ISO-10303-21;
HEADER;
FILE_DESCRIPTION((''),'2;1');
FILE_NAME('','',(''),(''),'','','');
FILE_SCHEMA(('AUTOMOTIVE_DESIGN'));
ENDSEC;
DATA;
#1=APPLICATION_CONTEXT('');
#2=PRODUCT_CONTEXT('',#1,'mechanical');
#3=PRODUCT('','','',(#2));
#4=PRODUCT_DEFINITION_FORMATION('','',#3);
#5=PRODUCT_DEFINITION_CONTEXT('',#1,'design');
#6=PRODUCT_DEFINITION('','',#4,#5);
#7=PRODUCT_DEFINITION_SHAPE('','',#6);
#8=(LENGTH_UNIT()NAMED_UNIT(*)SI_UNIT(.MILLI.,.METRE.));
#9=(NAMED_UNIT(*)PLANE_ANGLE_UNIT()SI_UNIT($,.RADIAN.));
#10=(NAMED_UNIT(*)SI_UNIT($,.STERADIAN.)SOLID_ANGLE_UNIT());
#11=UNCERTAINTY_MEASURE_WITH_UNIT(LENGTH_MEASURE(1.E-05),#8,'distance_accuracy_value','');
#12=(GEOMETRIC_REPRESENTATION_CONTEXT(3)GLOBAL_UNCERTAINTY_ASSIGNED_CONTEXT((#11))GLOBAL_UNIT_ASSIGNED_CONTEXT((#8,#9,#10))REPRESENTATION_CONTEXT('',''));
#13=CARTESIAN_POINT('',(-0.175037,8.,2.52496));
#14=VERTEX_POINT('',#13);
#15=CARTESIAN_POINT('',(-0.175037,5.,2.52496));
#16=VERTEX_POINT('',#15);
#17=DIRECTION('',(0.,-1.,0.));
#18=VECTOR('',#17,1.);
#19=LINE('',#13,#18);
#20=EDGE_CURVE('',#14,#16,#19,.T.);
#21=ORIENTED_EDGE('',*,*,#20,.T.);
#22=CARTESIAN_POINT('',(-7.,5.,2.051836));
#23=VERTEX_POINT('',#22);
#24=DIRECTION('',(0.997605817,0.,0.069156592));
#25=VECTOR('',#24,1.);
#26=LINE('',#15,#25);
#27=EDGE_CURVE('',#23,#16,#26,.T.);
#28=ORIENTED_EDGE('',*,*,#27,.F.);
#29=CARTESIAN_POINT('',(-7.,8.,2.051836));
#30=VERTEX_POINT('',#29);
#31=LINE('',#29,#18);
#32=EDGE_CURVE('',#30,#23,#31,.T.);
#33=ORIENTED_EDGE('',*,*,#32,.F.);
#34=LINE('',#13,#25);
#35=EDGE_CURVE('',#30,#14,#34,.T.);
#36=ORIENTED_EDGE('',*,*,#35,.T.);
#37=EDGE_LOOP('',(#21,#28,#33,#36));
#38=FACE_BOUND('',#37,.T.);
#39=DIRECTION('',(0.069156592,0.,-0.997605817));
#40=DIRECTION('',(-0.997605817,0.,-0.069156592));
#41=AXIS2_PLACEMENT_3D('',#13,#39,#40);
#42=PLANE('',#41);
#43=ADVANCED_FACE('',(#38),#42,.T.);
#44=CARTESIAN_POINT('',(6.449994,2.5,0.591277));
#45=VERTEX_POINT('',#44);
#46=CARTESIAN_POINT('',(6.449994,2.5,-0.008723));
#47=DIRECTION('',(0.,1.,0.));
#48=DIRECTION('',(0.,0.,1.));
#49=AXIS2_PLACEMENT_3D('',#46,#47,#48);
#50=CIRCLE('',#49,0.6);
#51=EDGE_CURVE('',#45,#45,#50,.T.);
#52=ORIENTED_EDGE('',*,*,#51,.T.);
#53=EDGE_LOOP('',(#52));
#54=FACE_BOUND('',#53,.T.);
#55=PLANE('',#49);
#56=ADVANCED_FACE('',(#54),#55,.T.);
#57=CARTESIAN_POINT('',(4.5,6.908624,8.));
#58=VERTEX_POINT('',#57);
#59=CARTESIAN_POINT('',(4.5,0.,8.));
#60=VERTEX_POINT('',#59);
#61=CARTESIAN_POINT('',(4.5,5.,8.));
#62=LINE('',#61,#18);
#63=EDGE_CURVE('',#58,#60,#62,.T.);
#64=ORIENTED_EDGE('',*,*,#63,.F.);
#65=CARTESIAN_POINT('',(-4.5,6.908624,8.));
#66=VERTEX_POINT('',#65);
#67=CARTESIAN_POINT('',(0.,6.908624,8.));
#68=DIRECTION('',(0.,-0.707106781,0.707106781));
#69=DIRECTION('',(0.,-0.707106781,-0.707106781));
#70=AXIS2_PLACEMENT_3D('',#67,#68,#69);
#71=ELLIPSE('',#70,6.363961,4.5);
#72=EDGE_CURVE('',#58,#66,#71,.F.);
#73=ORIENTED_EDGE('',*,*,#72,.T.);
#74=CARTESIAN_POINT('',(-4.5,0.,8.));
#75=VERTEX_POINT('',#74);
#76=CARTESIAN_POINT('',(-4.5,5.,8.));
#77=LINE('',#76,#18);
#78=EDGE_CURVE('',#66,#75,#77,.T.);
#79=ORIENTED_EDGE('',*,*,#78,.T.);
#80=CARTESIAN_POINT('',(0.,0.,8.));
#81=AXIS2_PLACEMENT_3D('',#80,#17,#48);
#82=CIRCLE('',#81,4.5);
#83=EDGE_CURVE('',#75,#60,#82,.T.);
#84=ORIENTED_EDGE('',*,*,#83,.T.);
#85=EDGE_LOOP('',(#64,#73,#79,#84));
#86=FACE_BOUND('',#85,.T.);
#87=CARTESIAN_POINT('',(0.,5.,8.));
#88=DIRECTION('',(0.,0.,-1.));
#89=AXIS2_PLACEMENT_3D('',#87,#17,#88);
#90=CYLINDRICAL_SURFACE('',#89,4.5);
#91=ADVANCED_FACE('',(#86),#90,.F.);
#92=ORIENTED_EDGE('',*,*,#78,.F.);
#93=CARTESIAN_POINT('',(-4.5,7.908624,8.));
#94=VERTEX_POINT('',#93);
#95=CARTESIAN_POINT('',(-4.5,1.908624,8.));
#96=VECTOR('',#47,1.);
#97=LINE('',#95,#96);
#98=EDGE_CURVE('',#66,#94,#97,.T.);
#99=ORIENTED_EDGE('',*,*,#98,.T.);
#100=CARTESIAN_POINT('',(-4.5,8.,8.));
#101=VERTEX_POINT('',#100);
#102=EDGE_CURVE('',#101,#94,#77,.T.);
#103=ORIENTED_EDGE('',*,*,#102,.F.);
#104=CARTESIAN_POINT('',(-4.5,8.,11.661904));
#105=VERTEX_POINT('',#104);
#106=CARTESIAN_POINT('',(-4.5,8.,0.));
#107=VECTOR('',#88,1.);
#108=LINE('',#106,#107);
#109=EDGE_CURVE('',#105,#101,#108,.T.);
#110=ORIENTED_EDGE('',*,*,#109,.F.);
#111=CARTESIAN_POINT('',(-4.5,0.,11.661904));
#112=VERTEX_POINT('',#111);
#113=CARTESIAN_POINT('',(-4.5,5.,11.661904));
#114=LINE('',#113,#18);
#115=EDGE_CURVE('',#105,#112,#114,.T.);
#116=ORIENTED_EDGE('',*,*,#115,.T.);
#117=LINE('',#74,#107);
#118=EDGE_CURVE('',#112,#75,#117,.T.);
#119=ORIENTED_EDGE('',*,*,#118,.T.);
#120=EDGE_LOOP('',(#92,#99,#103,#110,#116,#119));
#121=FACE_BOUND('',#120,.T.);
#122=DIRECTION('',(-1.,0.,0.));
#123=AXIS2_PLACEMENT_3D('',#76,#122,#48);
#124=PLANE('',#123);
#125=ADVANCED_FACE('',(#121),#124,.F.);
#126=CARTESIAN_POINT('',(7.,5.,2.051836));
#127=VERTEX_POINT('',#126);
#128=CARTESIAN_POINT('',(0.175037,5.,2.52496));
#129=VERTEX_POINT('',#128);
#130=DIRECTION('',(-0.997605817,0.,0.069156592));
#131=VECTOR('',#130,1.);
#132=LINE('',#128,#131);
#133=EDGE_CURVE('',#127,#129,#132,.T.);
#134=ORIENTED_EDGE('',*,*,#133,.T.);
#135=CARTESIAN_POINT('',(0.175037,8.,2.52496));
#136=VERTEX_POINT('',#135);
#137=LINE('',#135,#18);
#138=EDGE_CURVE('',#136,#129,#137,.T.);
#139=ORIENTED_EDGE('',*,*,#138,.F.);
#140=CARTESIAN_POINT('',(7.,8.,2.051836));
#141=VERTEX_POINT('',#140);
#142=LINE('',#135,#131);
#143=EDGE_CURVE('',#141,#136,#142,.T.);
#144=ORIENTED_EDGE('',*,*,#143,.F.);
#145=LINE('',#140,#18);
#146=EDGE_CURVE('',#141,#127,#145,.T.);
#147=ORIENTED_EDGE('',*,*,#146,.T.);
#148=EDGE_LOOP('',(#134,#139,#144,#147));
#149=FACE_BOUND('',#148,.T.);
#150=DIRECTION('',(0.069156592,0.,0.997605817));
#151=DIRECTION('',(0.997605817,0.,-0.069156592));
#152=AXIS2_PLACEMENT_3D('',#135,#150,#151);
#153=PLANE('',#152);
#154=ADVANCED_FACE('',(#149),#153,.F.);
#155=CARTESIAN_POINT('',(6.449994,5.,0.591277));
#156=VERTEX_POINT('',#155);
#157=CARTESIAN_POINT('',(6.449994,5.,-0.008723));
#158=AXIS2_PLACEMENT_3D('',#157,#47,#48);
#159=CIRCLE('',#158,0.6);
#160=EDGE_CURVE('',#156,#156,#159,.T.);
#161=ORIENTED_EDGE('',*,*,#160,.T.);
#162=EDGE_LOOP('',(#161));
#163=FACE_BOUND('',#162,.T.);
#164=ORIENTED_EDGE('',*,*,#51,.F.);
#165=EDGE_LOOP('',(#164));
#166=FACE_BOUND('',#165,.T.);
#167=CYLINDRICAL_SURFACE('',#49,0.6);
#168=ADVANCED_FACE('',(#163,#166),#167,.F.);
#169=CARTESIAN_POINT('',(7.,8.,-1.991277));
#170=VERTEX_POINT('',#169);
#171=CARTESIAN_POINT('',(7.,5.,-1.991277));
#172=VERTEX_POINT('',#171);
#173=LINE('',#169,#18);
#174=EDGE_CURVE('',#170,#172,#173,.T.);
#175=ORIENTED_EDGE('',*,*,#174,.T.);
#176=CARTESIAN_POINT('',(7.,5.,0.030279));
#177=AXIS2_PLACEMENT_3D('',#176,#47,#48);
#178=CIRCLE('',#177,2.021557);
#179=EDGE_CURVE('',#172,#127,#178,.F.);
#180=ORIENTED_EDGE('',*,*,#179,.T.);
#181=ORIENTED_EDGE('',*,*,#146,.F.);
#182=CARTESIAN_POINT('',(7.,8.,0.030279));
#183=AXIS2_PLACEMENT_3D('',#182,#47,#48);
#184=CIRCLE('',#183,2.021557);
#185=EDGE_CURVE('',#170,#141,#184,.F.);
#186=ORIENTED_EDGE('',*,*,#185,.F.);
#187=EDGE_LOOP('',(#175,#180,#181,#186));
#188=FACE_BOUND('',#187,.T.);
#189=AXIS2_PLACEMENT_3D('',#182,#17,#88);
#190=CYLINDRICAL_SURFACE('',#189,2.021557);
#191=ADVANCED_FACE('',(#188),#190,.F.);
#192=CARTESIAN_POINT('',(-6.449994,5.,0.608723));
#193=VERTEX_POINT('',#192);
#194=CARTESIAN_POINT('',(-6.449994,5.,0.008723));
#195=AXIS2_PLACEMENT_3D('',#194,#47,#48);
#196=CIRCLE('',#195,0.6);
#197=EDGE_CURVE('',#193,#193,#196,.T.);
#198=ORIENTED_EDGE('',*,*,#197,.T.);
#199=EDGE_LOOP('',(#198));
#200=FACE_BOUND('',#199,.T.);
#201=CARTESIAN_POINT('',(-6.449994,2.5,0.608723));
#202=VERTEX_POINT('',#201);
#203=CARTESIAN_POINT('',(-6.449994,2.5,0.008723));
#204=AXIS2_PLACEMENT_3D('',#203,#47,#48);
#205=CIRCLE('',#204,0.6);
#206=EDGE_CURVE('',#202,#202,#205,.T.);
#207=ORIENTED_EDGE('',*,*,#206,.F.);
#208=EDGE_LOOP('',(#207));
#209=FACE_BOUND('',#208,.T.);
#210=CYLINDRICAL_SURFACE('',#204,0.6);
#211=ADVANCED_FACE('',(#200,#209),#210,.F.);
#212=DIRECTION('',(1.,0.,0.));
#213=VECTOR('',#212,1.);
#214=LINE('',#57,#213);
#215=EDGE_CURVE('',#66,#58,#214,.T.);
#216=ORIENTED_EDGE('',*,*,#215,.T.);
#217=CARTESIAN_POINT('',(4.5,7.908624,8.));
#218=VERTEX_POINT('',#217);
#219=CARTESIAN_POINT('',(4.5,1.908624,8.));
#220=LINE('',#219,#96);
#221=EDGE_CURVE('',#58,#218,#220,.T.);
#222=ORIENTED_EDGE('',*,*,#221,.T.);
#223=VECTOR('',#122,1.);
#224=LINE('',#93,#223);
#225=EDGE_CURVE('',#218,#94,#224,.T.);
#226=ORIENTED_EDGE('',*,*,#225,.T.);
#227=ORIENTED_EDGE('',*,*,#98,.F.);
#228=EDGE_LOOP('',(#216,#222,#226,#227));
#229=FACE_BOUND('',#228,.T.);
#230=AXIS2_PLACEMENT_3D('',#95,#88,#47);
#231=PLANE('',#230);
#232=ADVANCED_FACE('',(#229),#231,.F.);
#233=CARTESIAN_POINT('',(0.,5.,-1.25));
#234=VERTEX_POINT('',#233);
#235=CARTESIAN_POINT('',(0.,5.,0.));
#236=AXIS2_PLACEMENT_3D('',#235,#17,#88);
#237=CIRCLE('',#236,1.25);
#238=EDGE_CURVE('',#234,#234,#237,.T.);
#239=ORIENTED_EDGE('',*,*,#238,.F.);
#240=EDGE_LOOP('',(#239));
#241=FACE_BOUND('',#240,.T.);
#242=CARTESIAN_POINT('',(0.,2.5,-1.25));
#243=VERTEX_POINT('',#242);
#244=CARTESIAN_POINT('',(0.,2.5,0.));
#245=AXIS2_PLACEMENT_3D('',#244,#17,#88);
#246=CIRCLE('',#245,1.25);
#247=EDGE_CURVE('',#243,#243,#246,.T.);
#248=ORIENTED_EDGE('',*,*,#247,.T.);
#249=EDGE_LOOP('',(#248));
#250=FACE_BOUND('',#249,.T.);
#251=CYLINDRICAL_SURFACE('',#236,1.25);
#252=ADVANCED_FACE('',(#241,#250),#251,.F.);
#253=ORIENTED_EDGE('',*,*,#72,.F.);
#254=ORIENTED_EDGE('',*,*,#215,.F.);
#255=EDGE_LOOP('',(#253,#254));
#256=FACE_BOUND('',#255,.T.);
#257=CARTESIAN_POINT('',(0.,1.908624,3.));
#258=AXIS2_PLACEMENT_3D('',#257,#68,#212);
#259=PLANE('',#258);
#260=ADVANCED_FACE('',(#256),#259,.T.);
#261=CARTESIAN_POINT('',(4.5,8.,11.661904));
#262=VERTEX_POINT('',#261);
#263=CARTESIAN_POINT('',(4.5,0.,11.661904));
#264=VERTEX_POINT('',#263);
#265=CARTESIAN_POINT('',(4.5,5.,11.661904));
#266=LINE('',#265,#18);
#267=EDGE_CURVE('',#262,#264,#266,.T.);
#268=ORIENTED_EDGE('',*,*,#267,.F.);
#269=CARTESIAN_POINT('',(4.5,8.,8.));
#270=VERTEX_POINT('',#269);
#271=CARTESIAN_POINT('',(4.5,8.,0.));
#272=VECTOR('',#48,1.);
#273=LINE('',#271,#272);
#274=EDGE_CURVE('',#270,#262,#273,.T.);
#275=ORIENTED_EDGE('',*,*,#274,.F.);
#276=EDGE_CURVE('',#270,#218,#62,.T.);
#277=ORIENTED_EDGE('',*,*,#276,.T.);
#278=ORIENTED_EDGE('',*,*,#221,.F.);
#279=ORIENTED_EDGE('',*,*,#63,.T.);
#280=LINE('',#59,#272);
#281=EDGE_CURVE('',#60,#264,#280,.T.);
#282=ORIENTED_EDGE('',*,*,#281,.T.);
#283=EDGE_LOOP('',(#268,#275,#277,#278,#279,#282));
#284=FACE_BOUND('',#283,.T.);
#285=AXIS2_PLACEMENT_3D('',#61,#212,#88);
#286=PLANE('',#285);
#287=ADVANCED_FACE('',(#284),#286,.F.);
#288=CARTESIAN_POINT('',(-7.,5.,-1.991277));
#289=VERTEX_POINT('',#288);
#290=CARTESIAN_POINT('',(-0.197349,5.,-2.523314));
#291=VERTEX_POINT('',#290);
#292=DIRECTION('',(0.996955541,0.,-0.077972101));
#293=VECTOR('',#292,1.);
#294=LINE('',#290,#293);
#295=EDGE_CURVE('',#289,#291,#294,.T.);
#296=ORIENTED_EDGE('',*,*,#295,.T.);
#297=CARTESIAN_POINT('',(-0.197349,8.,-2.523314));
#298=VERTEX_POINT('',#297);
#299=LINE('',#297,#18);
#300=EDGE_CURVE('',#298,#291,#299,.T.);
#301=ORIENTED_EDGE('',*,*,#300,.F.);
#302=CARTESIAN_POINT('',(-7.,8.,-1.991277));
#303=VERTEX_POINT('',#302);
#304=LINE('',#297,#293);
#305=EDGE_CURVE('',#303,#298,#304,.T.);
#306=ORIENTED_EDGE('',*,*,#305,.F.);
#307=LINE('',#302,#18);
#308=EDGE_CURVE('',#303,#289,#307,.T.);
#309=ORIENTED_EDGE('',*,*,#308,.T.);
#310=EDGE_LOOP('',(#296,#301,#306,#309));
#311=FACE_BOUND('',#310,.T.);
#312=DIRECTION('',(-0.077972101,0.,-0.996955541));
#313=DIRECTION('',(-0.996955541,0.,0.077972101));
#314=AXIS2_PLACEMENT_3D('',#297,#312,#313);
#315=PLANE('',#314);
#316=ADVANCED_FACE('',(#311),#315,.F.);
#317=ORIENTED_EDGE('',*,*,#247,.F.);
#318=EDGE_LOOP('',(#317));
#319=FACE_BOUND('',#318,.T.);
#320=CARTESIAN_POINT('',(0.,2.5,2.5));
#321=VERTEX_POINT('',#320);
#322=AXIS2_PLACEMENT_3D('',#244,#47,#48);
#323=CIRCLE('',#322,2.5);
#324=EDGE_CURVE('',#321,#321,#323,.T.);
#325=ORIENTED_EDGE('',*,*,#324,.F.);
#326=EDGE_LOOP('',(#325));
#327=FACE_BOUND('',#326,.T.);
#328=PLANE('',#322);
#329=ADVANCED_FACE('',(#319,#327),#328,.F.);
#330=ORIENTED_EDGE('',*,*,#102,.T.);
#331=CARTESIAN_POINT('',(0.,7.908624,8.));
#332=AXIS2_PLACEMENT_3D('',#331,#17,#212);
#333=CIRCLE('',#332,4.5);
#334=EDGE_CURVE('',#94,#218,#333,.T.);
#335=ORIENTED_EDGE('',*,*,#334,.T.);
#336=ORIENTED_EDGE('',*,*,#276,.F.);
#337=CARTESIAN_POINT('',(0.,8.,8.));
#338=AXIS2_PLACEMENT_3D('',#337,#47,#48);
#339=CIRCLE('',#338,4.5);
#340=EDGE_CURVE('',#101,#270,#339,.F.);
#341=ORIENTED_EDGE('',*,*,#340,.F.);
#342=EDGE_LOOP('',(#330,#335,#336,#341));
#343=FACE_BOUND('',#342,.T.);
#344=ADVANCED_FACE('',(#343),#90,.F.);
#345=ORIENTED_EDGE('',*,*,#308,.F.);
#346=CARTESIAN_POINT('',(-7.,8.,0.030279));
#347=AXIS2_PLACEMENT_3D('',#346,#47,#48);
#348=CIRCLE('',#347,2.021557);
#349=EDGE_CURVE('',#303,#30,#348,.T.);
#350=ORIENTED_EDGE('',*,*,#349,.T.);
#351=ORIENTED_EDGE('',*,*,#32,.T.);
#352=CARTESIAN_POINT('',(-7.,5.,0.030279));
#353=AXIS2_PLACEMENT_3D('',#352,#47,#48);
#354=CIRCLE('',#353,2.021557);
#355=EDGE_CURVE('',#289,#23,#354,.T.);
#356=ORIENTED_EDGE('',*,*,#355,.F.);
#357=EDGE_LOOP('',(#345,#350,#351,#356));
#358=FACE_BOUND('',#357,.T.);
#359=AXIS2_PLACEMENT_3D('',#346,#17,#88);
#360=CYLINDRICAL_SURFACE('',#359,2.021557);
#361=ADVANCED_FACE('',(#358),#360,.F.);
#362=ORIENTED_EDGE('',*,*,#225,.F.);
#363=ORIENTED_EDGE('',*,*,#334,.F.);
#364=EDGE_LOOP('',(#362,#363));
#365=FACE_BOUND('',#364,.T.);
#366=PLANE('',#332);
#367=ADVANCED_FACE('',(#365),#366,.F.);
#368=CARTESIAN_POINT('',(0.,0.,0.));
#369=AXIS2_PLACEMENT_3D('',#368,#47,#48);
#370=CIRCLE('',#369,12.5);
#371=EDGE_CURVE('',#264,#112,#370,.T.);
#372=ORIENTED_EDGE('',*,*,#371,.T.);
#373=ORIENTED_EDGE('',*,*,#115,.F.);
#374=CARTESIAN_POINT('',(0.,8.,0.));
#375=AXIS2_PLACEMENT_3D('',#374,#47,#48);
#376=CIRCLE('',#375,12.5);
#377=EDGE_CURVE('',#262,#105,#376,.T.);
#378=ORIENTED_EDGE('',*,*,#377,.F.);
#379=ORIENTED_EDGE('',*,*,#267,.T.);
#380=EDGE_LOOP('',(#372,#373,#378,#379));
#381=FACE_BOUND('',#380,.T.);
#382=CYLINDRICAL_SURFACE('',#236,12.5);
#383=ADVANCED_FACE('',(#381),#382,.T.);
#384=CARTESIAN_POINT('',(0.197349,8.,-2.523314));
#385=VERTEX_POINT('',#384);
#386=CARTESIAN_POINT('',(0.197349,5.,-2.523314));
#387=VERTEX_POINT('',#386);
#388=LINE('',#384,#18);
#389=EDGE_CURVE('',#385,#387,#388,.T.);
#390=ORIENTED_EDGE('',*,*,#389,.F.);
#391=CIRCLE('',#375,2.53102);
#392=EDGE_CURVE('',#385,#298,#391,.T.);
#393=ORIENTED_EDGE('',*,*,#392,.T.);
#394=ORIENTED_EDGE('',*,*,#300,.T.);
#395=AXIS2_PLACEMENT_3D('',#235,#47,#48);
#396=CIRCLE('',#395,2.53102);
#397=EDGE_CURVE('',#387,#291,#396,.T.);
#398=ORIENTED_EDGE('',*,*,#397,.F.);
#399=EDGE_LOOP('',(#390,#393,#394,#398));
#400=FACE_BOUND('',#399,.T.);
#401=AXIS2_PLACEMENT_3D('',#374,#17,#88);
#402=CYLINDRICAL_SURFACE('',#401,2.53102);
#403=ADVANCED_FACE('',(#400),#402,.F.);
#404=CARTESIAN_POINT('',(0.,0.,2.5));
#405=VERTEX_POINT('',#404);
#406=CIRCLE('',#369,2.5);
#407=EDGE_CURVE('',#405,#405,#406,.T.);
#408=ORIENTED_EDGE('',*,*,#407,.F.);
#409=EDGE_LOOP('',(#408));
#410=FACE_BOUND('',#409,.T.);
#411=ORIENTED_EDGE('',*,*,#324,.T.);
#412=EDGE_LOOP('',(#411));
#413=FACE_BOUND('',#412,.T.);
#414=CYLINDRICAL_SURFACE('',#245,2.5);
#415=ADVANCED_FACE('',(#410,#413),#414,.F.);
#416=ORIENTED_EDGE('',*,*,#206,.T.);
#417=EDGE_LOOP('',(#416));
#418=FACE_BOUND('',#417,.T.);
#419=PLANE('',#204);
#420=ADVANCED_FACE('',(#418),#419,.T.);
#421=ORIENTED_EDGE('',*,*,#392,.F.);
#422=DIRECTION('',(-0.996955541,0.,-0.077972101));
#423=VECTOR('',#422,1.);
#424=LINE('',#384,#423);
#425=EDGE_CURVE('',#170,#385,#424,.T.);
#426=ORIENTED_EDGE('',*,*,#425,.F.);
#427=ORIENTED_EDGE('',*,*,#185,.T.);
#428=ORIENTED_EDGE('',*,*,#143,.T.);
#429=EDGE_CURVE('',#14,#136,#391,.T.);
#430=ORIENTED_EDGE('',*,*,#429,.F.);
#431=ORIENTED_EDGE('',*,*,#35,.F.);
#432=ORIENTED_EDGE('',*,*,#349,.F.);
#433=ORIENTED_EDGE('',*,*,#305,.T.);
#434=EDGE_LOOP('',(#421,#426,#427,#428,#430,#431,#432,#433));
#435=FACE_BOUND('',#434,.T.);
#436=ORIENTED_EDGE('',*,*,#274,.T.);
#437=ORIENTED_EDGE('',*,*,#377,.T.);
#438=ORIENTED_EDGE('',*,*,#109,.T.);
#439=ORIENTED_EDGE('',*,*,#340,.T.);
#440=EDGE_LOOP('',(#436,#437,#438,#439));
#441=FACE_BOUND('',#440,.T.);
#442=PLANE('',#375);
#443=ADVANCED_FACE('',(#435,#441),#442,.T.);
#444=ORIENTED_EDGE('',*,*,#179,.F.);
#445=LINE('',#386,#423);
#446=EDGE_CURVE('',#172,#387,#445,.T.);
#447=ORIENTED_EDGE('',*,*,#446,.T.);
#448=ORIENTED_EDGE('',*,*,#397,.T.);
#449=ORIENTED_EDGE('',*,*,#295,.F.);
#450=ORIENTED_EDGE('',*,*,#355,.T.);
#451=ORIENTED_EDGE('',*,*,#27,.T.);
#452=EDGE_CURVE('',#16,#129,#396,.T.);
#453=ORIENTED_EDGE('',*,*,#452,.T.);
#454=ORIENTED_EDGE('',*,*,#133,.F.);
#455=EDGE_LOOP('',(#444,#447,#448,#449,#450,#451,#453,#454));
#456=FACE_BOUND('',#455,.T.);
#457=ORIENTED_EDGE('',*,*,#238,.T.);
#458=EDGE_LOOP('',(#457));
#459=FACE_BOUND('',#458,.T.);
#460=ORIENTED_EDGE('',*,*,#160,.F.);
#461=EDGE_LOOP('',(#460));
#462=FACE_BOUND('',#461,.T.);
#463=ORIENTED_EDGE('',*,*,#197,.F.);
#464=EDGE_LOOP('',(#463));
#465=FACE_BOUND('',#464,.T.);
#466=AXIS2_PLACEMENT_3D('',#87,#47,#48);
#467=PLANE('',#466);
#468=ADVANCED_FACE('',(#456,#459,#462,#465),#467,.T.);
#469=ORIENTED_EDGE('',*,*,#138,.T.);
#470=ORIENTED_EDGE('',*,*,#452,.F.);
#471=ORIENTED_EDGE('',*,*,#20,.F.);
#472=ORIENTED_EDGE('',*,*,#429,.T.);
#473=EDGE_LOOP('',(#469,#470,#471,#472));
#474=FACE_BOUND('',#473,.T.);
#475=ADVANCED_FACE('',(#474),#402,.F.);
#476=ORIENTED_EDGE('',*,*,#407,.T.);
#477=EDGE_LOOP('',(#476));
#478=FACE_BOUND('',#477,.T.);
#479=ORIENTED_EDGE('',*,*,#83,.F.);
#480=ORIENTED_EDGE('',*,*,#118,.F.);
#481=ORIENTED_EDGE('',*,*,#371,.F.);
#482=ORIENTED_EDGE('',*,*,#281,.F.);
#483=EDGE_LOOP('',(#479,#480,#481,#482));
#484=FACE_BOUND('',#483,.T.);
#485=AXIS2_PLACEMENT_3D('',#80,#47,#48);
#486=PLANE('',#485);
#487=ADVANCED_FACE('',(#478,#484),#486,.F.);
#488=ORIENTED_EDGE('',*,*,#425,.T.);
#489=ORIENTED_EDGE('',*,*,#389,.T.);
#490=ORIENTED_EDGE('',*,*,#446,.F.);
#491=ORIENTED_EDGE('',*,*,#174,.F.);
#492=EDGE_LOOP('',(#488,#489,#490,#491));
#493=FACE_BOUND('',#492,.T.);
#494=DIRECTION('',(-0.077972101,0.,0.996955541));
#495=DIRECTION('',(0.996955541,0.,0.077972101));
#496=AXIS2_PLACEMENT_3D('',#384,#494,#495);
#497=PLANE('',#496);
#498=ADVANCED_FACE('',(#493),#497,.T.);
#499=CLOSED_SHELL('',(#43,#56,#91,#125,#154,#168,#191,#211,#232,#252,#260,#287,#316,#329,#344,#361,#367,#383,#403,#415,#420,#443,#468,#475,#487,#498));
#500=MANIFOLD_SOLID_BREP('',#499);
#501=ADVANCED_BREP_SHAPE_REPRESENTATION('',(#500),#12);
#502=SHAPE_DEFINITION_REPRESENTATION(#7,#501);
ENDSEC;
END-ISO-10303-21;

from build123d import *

# Parameters (mm, degrees)
Y_KSEKLIK_EKSTR_ZYON1_DEPTH = 5
IZIM2_R                     = 2.5
KES_EKSTR_ZYON3_DEPTH       = 2.5
IZIM3_R                     = 1.25
KES_EKSTR_ZYON4_DEPTH       = 18.853571071
IZIM5_R                     = 0.6
KES_EKSTR_ZYON5_DEPTH       = 2.5
Y_KSEKLIK_EKSTR_ZYON3_DEPTH = 3
BOSS_EXTRUDE1_START         = 6
BOSS_EXTRUDE1_DEPTH         = 6
CHAMFER1_SIZE               = 5


with BuildPart() as part:
    # Çizim1 → Yükseklik-Ekstrüzyon1 (new body)
    with BuildSketch(Plane(origin=(0, 0, 0), x_dir=(1, 0, 0), z_dir=(0, 1, 0))):
        with BuildLine():
            Line((-4.5, -8), (-4.5, -11.66190379))
            ThreePointArc((-4.5, -11.66190379), (0, 12.5), (4.5, -11.66190379))
            Line((4.5, -11.66190379), (4.5, -8))
            ThreePointArc((4.5, -8), (0, -3.5), (-4.5, -8))
        make_face()
    extrude(amount=Y_KSEKLIK_EKSTR_ZYON1_DEPTH)

    # Çizim2 → Kes-Ekstrüzyon3 (cut)
    with BuildSketch(Plane(origin=(0, 0, 0), x_dir=(1, 0, 0), z_dir=(0, 1, 0))):
        with Locations(Location((0, 0, 0), (0, 0, 270))):
            Circle(IZIM2_R)
    extrude(amount=KES_EKSTR_ZYON3_DEPTH, mode=Mode.SUBTRACT)

    # Çizim3 → Kes-Ekstrüzyon4 (cut, through all)
    with BuildSketch(Plane.XZ.offset(-2.5)):
        with Locations(Location((0, 0, 0), (0, 0, 270))):
            Circle(IZIM3_R)
    extrude(amount=-KES_EKSTR_ZYON4_DEPTH, mode=Mode.SUBTRACT)

    # Çizim5 → Kes-Ekstrüzyon5 (cut)
    with BuildSketch(Plane(origin=(0, 5, 0), x_dir=(1, 0, 0), z_dir=(0, 1, 0))):
        with Locations(Location((-6.449994102, -0.008722575, 0), (0, 0, 270))):
            Circle(IZIM5_R)
        with Locations(Location((6.449994102, 0.008722575, 0), (0, 0, 270))):
            Circle(IZIM5_R)
    extrude(amount=-KES_EKSTR_ZYON5_DEPTH, mode=Mode.SUBTRACT)

    # Çizim6 → Yükseklik-Ekstrüzyon3 (add)
    with BuildSketch(Plane(origin=(0, 5, 0), x_dir=(1, 0, 0), z_dir=(0, 1, 0))):
        with BuildLine():
            Line((-4.5, -11.66190379), (-4.5, -8))
            ThreePointArc((-4.5, -8), (0, -3.5), (4.5, -8))
            Line((4.5, -8), (4.5, -11.66190379))
            ThreePointArc((4.5, -11.66190379), (0, 12.5), (-4.5, -11.66190379))
        make_face()
        with BuildLine():
            Line((7, 1.991277425), (0.197348928, 2.523314182))
            ThreePointArc((0.197348928, 2.523314182), (0, 2.531019767), (-0.197348928, 2.523314182))
            Line((-0.197348928, 2.523314182), (-7, 1.991277425))
            ThreePointArc((-7, 1.991277425), (-9.021556758, -0.030279333), (-7, -2.051836091))
            Line((-7, -2.051836091), (-0.175036702, -2.524960042))
            ThreePointArc((-0.175036702, -2.524960042), (0, -2.531019767), (0.175036702, -2.524960042))
            Line((0.175036702, -2.524960042), (7, -2.051836091))
            ThreePointArc((7, -2.051836091), (9.021556758, -0.030279333), (7, 1.991277425))
        make_face(mode=Mode.SUBTRACT)
    extrude(amount=Y_KSEKLIK_EKSTR_ZYON3_DEPTH)

    # Sketch1 → Boss-Extrude1 (add)
    with BuildSketch(Plane.XZ.offset(-7.908623835).offset(BOSS_EXTRUDE1_START)):
        with BuildLine():
            Line((-4.5, 8), (4.5, 8))
            ThreePointArc((4.5, 8), (0, 3.5), (-4.5, 8))
        make_face()
    extrude(amount=-BOSS_EXTRUDE1_DEPTH)

    # Chamfer1
    # the kernel refuses this chamfer: 5 mm, written as the material it takes off along each edge
    with BuildSketch(Plane(origin=(-17.35841494, 1.908623835, 8), x_dir=(0, -0.027495876610586226, -0.9996219169112968), z_dir=(1, 0, 0))) as chamfer1_piece_1_section:
        Polygon((CHAMFER1_SIZE * 0.999621916911, CHAMFER1_SIZE * 0.0274958766106), (-CHAMFER1_SIZE * 0.0274958766106, CHAMFER1_SIZE * 0.999621916911), (0, 0), align=None)
    chamfer1_piece_1 = extrude(amount=34.71682988, mode=Mode.PRIVATE)
    chamfer1_piece_1 = chamfer1_piece_1 & Plane(origin=(0, 3.682638029, 8), x_dir=(1, 0, 0), z_dir=(0, -1, 0)) * Cylinder(4.5, 90, mode=Mode.PRIVATE)
    add(chamfer1_piece_1, mode=Mode.SUBTRACT)


solid = part.part
